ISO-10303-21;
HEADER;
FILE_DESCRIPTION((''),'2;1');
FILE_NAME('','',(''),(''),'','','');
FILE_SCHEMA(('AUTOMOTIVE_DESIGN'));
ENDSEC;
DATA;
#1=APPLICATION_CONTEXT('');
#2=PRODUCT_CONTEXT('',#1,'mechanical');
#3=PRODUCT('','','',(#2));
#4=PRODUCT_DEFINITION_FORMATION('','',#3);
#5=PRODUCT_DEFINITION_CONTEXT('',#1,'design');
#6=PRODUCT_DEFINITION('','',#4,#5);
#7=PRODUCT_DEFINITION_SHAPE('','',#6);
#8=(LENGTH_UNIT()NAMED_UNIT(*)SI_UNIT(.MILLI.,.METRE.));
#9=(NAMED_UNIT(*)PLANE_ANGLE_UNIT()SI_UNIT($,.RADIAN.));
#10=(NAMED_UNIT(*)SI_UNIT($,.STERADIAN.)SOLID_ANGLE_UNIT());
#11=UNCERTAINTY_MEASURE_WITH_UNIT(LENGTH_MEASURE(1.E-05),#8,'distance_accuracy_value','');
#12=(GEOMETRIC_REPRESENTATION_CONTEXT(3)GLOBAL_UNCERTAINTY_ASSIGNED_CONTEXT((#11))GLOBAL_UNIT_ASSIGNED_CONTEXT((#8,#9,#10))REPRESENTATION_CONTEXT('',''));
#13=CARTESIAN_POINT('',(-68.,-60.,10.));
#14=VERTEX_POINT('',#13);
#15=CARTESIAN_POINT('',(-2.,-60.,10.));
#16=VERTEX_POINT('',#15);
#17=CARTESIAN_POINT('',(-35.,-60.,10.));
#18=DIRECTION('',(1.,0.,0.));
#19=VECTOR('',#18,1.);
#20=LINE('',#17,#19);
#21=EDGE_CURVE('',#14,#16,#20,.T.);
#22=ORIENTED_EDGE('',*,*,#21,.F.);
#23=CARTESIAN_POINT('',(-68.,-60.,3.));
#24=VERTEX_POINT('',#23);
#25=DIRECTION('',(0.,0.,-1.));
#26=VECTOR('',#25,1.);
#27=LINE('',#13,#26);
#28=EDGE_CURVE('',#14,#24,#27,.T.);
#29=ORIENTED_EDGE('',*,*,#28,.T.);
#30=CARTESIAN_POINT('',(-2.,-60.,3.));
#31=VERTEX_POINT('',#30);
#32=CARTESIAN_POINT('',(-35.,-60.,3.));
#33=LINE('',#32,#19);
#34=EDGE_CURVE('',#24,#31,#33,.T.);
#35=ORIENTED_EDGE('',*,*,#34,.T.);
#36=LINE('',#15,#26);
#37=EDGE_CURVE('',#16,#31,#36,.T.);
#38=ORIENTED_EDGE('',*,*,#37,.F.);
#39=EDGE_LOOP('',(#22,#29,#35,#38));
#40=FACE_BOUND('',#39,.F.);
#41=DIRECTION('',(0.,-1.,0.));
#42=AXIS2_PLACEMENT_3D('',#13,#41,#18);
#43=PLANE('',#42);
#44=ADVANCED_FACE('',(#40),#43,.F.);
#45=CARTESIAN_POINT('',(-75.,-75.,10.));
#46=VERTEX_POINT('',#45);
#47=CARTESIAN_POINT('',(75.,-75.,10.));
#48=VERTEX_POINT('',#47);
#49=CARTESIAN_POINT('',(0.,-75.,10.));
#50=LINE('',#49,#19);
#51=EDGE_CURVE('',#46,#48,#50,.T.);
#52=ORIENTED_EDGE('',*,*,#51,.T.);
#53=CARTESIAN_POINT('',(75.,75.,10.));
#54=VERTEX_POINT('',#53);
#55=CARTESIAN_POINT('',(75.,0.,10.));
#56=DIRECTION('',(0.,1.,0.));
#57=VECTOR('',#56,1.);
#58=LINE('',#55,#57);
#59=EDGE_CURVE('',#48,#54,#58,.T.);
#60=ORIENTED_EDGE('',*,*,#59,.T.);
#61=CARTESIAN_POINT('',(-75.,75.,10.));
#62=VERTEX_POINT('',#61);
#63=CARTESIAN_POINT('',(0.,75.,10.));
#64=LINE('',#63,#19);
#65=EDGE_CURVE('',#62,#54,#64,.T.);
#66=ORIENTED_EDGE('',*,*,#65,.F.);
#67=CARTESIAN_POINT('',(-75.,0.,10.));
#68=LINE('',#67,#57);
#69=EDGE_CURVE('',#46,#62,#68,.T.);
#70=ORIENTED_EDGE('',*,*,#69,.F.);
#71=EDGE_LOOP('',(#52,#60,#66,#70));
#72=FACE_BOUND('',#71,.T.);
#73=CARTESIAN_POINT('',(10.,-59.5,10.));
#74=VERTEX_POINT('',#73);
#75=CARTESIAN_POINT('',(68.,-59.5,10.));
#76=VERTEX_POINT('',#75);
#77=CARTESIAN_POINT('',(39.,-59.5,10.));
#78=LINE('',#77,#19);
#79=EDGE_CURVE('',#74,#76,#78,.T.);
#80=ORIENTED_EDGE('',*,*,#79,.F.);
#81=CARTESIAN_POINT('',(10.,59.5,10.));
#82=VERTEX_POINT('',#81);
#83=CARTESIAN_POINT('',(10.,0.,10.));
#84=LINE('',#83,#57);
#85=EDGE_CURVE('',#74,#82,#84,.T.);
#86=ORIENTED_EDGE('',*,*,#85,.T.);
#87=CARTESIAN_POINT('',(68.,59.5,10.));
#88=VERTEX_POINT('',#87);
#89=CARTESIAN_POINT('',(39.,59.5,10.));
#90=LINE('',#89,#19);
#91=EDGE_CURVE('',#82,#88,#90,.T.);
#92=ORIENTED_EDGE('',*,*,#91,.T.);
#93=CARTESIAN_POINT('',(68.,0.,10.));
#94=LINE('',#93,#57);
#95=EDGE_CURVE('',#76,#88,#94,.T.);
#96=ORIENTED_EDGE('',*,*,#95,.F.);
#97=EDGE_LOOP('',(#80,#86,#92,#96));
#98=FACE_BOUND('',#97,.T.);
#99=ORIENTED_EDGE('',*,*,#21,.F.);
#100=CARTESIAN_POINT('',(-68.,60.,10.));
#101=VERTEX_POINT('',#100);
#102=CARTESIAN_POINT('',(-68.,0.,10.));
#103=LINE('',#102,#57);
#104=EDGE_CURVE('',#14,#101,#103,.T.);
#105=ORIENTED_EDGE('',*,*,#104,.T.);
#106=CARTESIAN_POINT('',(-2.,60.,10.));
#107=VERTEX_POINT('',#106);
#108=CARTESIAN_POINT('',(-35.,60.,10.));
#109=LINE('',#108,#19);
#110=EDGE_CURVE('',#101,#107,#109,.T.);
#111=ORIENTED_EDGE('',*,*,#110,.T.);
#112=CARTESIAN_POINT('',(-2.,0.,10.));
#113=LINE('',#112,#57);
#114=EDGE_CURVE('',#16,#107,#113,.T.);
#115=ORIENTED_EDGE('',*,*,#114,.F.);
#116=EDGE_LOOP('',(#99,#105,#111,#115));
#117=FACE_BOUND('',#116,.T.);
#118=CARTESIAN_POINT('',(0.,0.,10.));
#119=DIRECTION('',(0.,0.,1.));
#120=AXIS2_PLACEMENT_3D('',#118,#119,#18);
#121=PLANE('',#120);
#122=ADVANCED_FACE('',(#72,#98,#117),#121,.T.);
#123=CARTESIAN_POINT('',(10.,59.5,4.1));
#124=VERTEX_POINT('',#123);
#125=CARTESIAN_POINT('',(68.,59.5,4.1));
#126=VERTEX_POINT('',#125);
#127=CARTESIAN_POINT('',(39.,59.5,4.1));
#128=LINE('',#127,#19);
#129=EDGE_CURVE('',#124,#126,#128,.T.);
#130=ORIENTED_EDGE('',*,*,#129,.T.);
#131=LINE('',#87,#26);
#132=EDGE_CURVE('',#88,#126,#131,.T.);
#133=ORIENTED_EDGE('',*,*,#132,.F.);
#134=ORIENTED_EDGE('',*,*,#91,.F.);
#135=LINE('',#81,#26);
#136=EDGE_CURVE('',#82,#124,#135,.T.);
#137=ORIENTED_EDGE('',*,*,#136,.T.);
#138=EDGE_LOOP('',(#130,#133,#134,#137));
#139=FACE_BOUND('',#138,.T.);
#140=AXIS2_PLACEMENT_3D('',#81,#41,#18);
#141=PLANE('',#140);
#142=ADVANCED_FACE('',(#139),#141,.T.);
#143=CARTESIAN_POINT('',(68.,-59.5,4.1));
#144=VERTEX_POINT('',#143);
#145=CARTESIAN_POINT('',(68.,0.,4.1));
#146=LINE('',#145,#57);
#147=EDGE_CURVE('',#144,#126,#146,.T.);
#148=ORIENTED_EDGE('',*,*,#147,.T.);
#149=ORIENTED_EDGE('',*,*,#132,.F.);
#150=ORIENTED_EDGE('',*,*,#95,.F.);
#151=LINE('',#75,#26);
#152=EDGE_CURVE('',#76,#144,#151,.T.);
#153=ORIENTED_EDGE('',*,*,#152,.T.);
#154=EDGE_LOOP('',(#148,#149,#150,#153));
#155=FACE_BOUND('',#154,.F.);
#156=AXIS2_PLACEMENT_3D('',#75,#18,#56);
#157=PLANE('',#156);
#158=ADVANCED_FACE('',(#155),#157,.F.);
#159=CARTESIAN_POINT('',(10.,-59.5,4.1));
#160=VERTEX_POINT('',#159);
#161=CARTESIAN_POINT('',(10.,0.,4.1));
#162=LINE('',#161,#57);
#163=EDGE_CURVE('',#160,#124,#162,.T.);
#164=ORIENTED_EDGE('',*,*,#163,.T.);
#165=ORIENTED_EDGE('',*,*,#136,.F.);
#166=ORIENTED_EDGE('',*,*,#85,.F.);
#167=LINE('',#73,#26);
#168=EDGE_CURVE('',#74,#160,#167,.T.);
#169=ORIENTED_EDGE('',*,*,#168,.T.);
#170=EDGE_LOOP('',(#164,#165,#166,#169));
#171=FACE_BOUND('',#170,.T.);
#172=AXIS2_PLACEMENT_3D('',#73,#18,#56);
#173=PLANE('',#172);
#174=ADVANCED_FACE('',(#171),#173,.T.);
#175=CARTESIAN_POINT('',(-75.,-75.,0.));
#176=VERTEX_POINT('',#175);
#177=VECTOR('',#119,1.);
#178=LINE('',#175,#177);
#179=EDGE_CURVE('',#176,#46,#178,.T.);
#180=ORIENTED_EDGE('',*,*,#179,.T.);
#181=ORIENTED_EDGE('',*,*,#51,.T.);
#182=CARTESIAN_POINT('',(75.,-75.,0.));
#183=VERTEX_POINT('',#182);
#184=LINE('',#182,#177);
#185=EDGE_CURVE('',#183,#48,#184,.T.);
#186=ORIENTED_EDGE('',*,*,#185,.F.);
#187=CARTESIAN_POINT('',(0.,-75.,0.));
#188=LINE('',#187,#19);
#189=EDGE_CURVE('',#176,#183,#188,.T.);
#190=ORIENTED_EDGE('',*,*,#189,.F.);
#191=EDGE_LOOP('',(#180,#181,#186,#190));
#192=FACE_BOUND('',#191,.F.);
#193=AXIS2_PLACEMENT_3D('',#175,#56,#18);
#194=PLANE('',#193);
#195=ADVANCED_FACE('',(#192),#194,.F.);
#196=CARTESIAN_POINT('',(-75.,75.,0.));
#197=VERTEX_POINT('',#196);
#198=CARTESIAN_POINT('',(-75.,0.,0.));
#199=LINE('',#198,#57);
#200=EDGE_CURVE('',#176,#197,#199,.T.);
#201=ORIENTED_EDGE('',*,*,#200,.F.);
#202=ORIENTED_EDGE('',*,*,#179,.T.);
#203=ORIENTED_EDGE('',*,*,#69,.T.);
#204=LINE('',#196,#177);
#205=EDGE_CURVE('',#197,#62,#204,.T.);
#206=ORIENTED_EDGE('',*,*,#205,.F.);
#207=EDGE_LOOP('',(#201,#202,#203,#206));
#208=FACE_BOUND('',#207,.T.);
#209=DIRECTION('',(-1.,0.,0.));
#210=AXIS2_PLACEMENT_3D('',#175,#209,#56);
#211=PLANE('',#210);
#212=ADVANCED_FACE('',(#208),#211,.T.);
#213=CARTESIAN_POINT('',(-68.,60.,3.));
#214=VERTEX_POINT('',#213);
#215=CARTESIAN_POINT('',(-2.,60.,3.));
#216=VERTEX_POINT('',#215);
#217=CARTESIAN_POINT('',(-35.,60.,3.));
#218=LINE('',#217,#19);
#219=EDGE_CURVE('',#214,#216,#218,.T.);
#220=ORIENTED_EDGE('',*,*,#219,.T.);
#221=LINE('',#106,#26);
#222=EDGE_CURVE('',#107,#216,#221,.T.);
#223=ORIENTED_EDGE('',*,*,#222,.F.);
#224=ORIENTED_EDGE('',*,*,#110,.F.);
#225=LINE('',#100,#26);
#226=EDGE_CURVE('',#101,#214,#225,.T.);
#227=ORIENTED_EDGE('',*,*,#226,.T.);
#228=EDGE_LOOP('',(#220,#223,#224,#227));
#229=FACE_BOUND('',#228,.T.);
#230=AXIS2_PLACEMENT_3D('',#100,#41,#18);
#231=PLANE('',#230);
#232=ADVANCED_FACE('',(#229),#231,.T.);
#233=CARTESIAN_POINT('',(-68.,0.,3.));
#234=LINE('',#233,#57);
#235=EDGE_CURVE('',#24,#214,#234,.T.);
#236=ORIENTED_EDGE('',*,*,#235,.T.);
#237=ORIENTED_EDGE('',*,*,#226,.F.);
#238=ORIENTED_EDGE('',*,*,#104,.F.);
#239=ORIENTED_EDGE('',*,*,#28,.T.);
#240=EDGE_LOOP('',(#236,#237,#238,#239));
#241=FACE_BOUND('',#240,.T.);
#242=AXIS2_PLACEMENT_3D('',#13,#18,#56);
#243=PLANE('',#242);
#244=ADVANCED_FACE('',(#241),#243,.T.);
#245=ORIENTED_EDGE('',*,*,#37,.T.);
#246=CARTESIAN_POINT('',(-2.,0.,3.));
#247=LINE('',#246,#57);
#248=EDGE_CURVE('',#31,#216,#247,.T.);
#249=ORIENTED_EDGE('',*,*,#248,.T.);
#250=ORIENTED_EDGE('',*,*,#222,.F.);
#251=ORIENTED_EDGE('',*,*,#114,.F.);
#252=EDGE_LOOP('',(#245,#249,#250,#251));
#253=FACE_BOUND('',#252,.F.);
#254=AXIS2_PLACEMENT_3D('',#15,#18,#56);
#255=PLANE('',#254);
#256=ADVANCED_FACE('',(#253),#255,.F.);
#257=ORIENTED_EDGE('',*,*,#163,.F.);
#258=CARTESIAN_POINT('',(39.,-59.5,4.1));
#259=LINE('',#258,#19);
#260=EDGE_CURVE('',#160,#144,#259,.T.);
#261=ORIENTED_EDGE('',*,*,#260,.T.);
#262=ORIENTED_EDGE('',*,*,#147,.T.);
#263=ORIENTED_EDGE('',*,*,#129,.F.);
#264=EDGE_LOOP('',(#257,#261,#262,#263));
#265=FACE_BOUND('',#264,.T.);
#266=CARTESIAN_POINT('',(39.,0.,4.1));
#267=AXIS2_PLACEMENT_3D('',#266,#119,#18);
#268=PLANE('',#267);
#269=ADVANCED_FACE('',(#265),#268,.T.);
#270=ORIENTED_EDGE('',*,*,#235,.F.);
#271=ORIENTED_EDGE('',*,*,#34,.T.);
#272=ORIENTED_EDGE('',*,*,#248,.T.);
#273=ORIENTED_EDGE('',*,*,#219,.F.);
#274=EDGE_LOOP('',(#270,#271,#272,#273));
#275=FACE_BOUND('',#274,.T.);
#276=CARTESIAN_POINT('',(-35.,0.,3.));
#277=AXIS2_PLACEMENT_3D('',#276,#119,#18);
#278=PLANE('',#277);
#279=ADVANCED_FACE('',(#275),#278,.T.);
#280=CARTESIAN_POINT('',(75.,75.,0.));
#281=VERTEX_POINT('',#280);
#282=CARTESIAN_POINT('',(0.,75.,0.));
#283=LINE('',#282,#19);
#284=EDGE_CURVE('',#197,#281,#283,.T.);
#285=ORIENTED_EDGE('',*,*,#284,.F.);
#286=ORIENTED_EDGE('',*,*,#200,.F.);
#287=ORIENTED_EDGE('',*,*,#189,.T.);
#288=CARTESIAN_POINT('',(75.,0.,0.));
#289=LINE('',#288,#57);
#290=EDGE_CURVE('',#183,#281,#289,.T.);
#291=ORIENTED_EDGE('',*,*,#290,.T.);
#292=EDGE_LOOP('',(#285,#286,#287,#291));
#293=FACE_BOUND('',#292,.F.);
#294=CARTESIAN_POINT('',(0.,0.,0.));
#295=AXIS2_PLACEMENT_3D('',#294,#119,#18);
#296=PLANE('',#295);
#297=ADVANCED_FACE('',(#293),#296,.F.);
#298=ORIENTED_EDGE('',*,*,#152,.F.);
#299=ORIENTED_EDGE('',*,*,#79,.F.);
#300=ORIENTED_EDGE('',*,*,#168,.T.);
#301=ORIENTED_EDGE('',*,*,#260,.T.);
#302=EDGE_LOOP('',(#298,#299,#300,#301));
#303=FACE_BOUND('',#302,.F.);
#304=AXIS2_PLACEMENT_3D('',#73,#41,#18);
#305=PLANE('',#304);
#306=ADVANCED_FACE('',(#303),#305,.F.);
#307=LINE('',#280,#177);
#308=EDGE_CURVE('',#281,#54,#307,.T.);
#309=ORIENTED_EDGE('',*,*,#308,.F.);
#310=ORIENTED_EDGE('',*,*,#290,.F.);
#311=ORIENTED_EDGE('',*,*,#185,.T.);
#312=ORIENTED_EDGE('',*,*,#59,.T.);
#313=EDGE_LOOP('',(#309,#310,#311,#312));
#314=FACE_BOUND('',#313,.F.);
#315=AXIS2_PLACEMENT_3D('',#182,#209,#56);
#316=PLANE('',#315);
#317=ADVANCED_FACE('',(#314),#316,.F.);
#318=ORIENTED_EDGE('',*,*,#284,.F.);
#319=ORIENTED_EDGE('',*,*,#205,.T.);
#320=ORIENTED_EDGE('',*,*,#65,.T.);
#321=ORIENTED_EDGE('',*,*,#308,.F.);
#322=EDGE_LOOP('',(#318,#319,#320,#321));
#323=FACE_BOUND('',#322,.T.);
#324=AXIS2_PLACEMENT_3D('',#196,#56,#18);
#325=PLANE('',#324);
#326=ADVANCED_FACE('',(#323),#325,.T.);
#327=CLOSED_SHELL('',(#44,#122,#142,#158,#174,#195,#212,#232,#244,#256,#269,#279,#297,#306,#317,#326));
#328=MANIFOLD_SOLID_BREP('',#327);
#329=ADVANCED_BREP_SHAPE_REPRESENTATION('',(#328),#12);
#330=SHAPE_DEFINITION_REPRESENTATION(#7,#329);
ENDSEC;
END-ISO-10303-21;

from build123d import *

# Parameters (mm, degrees)
F0_W     = 150
F0_H     = 150
F1_DEPTH = 10
F2_W     = 66
F2_H     = 120
F3_DEPTH = 7
F4_W     = 58
F4_H     = 119
F5_DEPTH = 5.9


# Not quite as in the source:
# - a feature names something its author has since deleted; it is built from what else it names


with BuildPart() as f1:
    # F0 (on Top) → F1 (new body)
    with BuildSketch(Plane.XY):
        Rectangle(F0_W, F0_H)
    extrude(amount=F1_DEPTH)

    # F2 (on face) → F3 (cut)
    with BuildSketch(Plane.XY.offset(10)):
        with Locations((-35, 0)):
            Rectangle(F2_W, F2_H)
    extrude(amount=-F3_DEPTH, mode=Mode.SUBTRACT)

    # F4 (on face) → F5 (cut)
    with BuildSketch(Plane.XY.offset(10)):
        with Locations((39, 0)):
            Rectangle(F4_W, F4_H)
    extrude(amount=-F5_DEPTH, mode=Mode.SUBTRACT)


solid = f1.part
